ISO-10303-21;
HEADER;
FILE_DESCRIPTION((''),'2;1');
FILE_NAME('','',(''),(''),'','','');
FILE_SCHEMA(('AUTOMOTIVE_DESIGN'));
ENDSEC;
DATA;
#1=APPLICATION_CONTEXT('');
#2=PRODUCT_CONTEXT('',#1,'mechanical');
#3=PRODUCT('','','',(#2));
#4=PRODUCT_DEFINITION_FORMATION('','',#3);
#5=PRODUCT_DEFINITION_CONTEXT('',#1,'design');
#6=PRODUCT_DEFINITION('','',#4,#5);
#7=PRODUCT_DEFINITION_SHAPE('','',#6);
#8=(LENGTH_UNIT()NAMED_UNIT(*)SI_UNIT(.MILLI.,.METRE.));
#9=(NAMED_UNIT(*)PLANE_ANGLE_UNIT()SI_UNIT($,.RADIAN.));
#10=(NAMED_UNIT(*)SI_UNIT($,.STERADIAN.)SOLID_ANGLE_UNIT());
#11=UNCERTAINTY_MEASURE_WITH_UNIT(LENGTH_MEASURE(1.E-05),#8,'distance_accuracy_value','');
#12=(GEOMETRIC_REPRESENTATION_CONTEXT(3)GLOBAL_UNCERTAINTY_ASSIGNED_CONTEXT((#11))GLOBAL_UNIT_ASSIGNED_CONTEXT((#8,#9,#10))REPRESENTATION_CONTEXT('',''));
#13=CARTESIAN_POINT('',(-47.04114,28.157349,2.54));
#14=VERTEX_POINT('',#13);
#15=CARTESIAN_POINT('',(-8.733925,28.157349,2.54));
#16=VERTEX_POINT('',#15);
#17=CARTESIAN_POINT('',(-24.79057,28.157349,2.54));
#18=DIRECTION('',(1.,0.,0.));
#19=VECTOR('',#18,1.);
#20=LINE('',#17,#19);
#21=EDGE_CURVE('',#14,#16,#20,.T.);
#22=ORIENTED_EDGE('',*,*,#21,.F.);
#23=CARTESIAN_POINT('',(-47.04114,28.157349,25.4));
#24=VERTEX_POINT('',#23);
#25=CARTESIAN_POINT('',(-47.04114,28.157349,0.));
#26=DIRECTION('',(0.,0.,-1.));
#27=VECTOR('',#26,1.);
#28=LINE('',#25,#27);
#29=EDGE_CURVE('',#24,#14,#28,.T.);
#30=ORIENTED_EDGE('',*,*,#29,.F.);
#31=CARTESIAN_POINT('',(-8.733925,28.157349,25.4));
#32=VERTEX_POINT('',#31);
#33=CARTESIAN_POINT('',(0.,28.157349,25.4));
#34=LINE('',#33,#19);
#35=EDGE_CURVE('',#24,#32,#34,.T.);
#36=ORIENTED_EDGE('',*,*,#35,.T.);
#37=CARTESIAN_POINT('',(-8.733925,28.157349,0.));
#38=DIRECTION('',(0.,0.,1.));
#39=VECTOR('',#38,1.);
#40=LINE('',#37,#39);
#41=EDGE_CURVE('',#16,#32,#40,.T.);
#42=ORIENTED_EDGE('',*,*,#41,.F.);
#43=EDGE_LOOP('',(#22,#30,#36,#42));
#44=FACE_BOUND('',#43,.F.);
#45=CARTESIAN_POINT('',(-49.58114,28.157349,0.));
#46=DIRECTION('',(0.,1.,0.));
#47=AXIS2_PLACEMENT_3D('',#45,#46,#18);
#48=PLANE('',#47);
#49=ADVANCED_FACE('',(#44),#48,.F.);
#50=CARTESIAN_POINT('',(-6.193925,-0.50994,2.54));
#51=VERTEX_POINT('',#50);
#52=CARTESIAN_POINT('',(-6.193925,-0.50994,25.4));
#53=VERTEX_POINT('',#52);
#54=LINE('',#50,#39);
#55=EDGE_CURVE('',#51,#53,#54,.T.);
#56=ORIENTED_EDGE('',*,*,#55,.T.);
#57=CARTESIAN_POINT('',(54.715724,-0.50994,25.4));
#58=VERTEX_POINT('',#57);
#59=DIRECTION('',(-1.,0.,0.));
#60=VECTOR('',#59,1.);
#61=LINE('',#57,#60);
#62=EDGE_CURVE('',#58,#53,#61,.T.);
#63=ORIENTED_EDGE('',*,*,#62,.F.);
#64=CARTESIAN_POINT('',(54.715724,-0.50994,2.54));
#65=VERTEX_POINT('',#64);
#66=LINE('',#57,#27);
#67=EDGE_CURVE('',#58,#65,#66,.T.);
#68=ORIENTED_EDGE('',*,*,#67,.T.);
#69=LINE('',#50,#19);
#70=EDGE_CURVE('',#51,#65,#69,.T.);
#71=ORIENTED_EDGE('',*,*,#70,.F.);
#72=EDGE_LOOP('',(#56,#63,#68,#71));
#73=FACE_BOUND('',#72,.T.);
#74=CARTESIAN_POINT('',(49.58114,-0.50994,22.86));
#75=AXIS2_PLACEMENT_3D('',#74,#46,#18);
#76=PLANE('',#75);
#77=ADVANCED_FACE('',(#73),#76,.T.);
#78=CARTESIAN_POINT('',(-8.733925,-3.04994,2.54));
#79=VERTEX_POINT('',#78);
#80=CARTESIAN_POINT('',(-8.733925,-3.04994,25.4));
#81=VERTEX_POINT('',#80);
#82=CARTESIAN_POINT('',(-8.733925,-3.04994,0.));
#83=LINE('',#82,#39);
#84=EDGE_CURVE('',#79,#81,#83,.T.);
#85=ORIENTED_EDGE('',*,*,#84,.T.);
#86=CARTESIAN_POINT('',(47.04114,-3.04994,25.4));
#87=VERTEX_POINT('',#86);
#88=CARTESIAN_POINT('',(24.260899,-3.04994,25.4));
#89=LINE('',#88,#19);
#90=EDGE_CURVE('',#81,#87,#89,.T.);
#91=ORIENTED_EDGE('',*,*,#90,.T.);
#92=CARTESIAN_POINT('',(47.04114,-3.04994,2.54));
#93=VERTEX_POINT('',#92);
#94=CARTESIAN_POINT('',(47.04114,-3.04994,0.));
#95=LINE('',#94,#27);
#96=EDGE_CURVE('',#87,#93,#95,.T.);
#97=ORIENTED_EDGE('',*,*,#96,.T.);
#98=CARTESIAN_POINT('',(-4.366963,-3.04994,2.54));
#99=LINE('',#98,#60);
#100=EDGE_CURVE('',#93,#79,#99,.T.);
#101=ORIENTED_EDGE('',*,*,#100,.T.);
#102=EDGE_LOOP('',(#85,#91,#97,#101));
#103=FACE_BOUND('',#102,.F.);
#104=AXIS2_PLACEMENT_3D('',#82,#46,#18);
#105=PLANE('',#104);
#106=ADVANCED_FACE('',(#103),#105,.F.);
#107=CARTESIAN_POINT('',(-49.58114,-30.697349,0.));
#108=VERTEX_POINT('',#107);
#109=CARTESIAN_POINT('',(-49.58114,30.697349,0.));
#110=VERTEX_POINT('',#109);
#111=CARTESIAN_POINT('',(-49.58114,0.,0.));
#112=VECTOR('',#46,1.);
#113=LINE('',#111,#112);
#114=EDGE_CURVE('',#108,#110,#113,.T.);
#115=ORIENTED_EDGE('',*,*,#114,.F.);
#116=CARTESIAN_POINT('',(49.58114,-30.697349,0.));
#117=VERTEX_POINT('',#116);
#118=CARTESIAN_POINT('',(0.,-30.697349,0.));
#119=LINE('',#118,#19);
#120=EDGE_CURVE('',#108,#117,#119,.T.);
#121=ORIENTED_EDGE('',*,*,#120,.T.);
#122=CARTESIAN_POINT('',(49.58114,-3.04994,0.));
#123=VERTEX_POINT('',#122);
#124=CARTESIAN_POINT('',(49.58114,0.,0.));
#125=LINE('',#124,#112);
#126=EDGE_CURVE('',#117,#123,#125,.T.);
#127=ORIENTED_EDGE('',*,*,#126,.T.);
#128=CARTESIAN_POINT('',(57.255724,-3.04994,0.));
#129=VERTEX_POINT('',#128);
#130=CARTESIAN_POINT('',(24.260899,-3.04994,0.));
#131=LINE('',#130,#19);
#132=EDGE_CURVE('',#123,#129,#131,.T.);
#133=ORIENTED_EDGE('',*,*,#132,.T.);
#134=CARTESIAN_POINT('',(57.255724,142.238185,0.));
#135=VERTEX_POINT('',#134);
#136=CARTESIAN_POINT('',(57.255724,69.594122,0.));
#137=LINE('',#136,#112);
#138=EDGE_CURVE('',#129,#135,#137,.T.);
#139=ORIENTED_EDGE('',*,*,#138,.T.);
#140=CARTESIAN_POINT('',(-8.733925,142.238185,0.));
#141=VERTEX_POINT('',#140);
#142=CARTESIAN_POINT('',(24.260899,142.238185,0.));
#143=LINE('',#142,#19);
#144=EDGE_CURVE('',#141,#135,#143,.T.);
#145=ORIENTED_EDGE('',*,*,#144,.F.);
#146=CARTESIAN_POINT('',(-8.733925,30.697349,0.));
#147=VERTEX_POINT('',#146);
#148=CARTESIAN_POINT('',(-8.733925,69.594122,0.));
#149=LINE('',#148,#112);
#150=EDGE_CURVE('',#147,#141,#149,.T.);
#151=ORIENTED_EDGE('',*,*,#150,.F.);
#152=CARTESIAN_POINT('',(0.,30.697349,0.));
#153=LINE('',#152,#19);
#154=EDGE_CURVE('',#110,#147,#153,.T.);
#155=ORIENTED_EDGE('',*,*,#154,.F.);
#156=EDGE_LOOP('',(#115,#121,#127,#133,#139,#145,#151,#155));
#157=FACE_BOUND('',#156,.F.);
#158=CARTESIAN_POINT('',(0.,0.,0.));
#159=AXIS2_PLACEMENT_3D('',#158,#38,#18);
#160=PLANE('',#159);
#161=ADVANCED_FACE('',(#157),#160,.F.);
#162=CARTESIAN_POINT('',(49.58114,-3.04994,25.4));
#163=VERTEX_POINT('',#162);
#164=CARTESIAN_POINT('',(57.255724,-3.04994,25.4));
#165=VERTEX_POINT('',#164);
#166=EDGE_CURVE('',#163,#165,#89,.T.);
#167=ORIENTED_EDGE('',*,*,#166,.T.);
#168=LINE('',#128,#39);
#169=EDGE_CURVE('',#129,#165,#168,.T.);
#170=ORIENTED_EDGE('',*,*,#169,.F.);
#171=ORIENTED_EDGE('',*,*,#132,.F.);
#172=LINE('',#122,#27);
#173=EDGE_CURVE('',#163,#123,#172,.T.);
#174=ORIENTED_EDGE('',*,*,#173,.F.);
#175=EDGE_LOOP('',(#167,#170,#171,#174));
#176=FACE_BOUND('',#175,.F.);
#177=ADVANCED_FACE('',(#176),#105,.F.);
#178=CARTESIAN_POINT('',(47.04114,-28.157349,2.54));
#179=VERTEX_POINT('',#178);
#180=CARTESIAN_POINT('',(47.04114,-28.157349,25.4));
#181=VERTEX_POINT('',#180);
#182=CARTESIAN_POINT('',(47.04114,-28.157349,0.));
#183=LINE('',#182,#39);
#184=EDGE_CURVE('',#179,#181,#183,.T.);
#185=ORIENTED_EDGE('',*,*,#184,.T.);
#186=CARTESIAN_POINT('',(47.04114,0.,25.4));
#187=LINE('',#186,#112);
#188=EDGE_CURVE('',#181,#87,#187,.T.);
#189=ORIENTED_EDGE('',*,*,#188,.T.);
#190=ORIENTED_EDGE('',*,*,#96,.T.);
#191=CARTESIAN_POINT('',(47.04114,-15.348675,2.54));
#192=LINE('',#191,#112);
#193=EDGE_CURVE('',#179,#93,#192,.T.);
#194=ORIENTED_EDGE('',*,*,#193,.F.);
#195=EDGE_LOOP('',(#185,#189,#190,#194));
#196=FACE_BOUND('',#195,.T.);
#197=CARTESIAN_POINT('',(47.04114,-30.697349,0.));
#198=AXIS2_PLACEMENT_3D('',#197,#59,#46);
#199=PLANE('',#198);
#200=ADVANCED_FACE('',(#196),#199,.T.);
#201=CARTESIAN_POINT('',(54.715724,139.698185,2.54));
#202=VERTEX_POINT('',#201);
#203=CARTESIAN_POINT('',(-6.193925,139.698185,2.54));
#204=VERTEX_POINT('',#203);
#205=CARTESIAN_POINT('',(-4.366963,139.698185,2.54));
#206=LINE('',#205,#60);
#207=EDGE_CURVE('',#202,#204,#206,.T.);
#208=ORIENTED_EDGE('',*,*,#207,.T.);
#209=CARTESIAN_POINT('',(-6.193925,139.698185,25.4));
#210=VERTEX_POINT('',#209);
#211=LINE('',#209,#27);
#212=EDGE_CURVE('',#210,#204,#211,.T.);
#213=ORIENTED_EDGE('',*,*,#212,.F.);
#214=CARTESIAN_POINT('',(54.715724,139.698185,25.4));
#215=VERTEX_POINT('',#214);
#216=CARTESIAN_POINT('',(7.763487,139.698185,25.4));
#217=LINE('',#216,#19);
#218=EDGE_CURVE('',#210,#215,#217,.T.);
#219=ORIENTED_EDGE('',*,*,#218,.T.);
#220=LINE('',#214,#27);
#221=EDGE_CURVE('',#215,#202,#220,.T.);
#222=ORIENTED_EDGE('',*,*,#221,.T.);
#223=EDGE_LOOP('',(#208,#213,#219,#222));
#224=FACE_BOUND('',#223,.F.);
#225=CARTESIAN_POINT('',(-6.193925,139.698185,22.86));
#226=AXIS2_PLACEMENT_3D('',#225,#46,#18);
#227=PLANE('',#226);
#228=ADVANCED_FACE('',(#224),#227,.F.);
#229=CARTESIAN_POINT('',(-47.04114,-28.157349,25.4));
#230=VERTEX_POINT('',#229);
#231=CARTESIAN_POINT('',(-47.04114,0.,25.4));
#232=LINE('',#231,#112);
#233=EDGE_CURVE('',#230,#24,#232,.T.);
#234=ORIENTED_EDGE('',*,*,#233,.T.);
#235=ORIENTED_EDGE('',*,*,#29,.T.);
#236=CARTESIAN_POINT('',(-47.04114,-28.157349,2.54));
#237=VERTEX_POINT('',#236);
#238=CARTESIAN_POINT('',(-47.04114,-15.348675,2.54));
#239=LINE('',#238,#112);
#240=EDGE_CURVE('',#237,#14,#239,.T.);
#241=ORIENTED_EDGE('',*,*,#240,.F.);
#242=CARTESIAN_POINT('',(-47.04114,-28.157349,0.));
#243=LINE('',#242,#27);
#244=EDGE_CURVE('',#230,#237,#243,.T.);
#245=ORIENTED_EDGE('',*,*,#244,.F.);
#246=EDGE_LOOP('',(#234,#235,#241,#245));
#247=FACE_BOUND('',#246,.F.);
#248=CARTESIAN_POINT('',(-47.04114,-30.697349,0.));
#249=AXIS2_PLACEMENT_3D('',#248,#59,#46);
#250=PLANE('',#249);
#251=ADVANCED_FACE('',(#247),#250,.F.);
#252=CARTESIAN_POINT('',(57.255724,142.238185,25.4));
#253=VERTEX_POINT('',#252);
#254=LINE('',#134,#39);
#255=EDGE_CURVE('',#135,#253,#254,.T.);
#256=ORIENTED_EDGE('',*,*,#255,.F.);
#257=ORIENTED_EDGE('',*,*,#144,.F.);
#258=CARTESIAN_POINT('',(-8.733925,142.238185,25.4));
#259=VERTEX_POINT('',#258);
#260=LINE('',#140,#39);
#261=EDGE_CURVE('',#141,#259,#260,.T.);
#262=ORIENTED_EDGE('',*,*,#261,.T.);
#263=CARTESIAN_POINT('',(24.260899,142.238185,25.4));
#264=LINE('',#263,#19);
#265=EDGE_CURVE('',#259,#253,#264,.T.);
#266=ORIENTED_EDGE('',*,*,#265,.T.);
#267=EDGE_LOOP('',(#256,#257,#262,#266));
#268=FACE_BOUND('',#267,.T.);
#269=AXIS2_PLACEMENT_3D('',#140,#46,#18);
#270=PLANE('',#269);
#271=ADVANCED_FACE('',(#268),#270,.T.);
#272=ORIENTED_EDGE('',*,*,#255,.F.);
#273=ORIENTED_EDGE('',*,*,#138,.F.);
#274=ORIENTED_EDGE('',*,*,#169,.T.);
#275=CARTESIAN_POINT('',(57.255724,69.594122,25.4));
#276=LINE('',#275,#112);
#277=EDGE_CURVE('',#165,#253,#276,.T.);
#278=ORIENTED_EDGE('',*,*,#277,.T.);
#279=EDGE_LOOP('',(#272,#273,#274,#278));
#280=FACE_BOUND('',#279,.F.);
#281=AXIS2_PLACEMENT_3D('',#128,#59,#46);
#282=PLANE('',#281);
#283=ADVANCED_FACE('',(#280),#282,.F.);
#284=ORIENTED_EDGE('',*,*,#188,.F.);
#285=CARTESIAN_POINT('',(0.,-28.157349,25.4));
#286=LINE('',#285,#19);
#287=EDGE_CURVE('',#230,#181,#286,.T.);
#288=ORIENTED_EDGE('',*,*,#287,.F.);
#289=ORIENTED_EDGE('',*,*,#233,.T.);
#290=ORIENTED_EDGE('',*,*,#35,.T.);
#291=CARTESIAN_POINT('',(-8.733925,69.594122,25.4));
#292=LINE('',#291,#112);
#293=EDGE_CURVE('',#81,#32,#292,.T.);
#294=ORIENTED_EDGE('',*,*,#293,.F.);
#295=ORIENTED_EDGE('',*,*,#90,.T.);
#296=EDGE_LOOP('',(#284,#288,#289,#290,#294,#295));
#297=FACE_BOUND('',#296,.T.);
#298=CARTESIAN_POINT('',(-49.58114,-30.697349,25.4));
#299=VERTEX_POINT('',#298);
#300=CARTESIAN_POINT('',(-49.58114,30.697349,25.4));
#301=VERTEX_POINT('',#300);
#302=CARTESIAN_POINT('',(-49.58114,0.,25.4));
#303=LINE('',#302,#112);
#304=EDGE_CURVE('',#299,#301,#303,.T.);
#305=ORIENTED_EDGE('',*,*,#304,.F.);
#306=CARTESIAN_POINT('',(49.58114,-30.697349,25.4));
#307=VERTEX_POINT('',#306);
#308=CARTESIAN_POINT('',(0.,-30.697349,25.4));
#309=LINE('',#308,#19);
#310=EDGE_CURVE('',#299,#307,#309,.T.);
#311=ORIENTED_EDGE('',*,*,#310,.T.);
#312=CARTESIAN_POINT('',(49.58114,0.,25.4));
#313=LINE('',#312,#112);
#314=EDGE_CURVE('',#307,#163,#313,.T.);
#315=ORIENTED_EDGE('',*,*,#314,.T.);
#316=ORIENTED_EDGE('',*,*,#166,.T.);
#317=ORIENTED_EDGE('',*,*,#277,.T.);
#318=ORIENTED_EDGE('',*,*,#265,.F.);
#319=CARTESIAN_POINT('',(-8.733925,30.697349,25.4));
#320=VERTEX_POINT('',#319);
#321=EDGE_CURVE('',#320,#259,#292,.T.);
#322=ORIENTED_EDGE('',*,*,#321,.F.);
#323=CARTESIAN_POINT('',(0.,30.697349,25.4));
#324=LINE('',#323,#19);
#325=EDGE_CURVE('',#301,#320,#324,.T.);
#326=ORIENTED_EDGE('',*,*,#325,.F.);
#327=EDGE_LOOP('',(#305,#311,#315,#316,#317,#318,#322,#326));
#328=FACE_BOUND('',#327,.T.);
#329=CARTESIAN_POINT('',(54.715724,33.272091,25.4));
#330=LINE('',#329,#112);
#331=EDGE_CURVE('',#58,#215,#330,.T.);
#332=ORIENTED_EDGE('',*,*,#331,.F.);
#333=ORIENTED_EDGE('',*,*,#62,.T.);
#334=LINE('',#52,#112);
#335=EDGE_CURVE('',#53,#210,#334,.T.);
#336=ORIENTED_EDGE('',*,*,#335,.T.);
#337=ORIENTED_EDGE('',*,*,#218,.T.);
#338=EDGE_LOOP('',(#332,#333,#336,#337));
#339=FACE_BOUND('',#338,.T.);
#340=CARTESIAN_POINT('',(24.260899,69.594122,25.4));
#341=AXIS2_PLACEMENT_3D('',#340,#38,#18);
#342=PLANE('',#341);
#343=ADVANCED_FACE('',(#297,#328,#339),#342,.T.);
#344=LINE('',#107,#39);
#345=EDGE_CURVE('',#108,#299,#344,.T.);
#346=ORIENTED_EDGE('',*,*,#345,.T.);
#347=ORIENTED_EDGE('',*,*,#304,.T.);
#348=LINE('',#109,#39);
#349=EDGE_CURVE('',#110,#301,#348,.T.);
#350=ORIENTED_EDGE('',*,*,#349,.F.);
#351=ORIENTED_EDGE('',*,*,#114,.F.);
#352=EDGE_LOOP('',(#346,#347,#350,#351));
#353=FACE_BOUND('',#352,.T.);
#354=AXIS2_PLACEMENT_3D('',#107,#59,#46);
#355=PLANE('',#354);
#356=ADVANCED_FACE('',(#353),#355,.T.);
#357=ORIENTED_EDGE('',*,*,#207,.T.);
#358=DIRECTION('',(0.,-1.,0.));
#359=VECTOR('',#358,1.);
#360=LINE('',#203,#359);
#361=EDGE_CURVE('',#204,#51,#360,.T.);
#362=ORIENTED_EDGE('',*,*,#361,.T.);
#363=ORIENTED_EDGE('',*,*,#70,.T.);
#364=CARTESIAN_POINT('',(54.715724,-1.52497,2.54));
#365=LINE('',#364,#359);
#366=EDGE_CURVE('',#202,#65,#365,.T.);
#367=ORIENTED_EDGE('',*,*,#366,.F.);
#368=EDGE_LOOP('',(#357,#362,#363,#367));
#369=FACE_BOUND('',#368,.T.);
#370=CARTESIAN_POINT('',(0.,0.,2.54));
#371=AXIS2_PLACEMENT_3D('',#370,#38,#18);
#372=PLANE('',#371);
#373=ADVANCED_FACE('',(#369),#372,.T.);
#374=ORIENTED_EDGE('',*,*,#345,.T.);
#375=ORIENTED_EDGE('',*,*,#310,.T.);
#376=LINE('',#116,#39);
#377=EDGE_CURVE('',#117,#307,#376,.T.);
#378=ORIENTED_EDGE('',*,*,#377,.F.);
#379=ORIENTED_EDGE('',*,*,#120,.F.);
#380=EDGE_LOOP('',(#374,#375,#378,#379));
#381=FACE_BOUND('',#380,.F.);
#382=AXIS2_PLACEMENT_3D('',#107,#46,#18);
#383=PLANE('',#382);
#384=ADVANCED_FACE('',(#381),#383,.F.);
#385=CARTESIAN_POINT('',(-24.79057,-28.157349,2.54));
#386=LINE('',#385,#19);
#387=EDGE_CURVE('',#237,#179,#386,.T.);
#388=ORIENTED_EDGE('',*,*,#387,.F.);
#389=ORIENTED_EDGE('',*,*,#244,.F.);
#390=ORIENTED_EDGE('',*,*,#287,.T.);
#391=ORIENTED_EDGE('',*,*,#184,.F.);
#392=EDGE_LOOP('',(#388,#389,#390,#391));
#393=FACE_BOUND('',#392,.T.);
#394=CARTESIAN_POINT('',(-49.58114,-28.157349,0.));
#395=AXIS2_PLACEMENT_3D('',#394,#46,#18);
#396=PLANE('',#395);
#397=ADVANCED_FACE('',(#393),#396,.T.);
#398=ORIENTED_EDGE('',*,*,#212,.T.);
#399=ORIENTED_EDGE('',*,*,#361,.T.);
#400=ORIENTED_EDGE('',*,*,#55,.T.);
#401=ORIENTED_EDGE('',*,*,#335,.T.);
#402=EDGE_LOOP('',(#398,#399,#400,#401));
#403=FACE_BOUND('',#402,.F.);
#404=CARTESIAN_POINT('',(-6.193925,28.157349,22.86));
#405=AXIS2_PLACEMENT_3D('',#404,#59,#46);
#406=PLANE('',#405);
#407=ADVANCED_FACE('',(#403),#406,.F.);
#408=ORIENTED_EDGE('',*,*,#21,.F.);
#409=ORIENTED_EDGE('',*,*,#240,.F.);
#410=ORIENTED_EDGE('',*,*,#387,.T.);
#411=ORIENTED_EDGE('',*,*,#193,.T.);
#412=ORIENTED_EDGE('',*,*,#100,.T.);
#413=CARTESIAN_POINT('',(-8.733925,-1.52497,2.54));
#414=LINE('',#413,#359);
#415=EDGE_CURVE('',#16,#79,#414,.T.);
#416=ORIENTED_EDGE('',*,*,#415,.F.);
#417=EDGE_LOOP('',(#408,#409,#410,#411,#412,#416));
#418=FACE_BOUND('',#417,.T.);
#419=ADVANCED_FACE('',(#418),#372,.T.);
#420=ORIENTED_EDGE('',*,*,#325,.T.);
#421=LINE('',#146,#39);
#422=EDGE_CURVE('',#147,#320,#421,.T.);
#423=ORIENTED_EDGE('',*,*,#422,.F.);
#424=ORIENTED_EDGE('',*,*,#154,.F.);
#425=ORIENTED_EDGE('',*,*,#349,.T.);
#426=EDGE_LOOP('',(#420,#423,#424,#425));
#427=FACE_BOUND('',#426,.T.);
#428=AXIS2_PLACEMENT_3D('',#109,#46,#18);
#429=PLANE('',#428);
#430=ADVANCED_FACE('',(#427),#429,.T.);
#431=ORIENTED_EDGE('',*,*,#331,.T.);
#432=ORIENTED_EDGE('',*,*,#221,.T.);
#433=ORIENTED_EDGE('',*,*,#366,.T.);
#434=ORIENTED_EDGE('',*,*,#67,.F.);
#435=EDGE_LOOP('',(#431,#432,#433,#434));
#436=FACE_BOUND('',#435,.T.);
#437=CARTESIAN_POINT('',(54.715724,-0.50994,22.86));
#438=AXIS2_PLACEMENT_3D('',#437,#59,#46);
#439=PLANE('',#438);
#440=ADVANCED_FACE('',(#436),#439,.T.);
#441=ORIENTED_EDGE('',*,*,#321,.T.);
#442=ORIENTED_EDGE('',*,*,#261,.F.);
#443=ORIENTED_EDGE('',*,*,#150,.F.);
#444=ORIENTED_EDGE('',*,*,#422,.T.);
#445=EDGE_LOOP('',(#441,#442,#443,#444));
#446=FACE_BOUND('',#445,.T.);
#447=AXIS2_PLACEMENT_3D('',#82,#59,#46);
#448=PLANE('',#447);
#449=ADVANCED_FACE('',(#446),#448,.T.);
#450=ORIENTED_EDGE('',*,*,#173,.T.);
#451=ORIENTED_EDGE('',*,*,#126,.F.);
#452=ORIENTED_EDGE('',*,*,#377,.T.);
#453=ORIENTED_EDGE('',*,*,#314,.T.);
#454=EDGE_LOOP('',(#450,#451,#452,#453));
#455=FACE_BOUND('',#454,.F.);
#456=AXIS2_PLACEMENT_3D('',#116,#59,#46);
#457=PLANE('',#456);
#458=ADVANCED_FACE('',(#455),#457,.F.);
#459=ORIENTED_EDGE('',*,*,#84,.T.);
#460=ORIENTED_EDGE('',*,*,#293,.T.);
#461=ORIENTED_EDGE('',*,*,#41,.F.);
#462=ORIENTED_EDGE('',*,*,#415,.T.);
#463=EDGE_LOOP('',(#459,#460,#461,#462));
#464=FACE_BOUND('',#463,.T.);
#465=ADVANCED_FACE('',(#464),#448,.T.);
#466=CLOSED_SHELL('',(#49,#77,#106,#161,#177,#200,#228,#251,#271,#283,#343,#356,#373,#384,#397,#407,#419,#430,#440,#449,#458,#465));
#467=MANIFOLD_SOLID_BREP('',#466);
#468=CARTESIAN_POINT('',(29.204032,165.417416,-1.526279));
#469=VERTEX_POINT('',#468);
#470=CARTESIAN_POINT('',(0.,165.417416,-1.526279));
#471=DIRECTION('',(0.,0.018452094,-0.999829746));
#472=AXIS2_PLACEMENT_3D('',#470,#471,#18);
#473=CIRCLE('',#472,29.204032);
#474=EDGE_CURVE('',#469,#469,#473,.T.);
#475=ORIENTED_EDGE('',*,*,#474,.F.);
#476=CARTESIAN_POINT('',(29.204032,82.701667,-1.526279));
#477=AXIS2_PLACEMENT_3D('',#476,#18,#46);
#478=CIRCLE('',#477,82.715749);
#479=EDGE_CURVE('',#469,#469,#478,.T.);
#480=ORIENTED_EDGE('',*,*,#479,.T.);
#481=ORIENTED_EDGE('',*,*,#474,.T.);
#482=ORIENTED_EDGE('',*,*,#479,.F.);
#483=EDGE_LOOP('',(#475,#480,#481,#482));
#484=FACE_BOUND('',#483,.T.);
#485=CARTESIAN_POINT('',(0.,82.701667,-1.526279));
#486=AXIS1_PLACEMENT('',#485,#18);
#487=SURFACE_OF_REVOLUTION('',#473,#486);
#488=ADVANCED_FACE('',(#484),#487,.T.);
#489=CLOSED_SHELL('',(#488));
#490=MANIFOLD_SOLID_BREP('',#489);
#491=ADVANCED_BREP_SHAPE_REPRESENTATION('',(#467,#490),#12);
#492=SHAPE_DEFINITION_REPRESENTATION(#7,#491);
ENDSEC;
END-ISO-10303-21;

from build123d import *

# Parameters (mm, degrees)
F0_W     = 99.1622805595
F0_H     = 61.3946989179
F1_DEPTH = 25.4
F2_T     = -2.54
F3_W     = 65.9896489233
F3_H     = 145.2881251462
F4_DEPTH = 25.4
F5_T     = -2.54
F8_R     = 29.2040319406


# Not quite as in the source:
# - a shell that OpenCascade refuses in one call is made with other operations: the cavity is built on its own and cut out


with BuildPart() as f1:
    # F0 (on Top) → F1 (new body)
    with BuildSketch(Plane.XY):
        Rectangle(F0_W, F0_H)
    extrude(amount=F1_DEPTH)

    # F2
    f2_openings = [f1.faces().sort_by_distance(p)[0] for p in [
        (0, 0, 25.4),
    ]]
    offset(amount=F2_T, openings=f2_openings)

    # F3 (on Top) → F4 (join)
    with BuildSketch(Plane.XY):
        with Locations((24.260899052, 69.5941224694)):
            Rectangle(F3_W, F3_H)
    extrude(amount=F4_DEPTH)

    # F5: a shell. OpenCascade refuses it in one call, so the cavity is built on its own and cut out:
    # the body offset inwards by the wall thickness, plus a prism from it out through each open face.
    f5_core = offset(f1.part, amount=F5_T, kind=Kind.INTERSECTION, mode=Mode.PRIVATE)
    f5_exits = [f5_core.faces().sort_by_distance(p)[0] for p in [
        (24.260899, 69.594122, 22.86),
    ]]
    add(f5_core, mode=Mode.SUBTRACT)
    extrude(f5_exits, amount=-F5_T, mode=Mode.SUBTRACT)


with BuildPart() as f6_1:
    # F6: copy of F1
    add(f1.part.moved(Location((0, 65.532, 0))))


with BuildPart() as f10:
    # F10: sweep along a path in F9
    with BuildLine(Plane.YZ) as f10_path:
        CenterArc((82.7016666332, -1.5262787929), 82.715749352, 0, 360)
    # F8 (on Top) → F10 (sweep)
    with BuildSketch(Plane.XY):
        Circle(F8_R)
    sweep(path=f10_path.line)


solid = Compound([f1.part, f10.part])
